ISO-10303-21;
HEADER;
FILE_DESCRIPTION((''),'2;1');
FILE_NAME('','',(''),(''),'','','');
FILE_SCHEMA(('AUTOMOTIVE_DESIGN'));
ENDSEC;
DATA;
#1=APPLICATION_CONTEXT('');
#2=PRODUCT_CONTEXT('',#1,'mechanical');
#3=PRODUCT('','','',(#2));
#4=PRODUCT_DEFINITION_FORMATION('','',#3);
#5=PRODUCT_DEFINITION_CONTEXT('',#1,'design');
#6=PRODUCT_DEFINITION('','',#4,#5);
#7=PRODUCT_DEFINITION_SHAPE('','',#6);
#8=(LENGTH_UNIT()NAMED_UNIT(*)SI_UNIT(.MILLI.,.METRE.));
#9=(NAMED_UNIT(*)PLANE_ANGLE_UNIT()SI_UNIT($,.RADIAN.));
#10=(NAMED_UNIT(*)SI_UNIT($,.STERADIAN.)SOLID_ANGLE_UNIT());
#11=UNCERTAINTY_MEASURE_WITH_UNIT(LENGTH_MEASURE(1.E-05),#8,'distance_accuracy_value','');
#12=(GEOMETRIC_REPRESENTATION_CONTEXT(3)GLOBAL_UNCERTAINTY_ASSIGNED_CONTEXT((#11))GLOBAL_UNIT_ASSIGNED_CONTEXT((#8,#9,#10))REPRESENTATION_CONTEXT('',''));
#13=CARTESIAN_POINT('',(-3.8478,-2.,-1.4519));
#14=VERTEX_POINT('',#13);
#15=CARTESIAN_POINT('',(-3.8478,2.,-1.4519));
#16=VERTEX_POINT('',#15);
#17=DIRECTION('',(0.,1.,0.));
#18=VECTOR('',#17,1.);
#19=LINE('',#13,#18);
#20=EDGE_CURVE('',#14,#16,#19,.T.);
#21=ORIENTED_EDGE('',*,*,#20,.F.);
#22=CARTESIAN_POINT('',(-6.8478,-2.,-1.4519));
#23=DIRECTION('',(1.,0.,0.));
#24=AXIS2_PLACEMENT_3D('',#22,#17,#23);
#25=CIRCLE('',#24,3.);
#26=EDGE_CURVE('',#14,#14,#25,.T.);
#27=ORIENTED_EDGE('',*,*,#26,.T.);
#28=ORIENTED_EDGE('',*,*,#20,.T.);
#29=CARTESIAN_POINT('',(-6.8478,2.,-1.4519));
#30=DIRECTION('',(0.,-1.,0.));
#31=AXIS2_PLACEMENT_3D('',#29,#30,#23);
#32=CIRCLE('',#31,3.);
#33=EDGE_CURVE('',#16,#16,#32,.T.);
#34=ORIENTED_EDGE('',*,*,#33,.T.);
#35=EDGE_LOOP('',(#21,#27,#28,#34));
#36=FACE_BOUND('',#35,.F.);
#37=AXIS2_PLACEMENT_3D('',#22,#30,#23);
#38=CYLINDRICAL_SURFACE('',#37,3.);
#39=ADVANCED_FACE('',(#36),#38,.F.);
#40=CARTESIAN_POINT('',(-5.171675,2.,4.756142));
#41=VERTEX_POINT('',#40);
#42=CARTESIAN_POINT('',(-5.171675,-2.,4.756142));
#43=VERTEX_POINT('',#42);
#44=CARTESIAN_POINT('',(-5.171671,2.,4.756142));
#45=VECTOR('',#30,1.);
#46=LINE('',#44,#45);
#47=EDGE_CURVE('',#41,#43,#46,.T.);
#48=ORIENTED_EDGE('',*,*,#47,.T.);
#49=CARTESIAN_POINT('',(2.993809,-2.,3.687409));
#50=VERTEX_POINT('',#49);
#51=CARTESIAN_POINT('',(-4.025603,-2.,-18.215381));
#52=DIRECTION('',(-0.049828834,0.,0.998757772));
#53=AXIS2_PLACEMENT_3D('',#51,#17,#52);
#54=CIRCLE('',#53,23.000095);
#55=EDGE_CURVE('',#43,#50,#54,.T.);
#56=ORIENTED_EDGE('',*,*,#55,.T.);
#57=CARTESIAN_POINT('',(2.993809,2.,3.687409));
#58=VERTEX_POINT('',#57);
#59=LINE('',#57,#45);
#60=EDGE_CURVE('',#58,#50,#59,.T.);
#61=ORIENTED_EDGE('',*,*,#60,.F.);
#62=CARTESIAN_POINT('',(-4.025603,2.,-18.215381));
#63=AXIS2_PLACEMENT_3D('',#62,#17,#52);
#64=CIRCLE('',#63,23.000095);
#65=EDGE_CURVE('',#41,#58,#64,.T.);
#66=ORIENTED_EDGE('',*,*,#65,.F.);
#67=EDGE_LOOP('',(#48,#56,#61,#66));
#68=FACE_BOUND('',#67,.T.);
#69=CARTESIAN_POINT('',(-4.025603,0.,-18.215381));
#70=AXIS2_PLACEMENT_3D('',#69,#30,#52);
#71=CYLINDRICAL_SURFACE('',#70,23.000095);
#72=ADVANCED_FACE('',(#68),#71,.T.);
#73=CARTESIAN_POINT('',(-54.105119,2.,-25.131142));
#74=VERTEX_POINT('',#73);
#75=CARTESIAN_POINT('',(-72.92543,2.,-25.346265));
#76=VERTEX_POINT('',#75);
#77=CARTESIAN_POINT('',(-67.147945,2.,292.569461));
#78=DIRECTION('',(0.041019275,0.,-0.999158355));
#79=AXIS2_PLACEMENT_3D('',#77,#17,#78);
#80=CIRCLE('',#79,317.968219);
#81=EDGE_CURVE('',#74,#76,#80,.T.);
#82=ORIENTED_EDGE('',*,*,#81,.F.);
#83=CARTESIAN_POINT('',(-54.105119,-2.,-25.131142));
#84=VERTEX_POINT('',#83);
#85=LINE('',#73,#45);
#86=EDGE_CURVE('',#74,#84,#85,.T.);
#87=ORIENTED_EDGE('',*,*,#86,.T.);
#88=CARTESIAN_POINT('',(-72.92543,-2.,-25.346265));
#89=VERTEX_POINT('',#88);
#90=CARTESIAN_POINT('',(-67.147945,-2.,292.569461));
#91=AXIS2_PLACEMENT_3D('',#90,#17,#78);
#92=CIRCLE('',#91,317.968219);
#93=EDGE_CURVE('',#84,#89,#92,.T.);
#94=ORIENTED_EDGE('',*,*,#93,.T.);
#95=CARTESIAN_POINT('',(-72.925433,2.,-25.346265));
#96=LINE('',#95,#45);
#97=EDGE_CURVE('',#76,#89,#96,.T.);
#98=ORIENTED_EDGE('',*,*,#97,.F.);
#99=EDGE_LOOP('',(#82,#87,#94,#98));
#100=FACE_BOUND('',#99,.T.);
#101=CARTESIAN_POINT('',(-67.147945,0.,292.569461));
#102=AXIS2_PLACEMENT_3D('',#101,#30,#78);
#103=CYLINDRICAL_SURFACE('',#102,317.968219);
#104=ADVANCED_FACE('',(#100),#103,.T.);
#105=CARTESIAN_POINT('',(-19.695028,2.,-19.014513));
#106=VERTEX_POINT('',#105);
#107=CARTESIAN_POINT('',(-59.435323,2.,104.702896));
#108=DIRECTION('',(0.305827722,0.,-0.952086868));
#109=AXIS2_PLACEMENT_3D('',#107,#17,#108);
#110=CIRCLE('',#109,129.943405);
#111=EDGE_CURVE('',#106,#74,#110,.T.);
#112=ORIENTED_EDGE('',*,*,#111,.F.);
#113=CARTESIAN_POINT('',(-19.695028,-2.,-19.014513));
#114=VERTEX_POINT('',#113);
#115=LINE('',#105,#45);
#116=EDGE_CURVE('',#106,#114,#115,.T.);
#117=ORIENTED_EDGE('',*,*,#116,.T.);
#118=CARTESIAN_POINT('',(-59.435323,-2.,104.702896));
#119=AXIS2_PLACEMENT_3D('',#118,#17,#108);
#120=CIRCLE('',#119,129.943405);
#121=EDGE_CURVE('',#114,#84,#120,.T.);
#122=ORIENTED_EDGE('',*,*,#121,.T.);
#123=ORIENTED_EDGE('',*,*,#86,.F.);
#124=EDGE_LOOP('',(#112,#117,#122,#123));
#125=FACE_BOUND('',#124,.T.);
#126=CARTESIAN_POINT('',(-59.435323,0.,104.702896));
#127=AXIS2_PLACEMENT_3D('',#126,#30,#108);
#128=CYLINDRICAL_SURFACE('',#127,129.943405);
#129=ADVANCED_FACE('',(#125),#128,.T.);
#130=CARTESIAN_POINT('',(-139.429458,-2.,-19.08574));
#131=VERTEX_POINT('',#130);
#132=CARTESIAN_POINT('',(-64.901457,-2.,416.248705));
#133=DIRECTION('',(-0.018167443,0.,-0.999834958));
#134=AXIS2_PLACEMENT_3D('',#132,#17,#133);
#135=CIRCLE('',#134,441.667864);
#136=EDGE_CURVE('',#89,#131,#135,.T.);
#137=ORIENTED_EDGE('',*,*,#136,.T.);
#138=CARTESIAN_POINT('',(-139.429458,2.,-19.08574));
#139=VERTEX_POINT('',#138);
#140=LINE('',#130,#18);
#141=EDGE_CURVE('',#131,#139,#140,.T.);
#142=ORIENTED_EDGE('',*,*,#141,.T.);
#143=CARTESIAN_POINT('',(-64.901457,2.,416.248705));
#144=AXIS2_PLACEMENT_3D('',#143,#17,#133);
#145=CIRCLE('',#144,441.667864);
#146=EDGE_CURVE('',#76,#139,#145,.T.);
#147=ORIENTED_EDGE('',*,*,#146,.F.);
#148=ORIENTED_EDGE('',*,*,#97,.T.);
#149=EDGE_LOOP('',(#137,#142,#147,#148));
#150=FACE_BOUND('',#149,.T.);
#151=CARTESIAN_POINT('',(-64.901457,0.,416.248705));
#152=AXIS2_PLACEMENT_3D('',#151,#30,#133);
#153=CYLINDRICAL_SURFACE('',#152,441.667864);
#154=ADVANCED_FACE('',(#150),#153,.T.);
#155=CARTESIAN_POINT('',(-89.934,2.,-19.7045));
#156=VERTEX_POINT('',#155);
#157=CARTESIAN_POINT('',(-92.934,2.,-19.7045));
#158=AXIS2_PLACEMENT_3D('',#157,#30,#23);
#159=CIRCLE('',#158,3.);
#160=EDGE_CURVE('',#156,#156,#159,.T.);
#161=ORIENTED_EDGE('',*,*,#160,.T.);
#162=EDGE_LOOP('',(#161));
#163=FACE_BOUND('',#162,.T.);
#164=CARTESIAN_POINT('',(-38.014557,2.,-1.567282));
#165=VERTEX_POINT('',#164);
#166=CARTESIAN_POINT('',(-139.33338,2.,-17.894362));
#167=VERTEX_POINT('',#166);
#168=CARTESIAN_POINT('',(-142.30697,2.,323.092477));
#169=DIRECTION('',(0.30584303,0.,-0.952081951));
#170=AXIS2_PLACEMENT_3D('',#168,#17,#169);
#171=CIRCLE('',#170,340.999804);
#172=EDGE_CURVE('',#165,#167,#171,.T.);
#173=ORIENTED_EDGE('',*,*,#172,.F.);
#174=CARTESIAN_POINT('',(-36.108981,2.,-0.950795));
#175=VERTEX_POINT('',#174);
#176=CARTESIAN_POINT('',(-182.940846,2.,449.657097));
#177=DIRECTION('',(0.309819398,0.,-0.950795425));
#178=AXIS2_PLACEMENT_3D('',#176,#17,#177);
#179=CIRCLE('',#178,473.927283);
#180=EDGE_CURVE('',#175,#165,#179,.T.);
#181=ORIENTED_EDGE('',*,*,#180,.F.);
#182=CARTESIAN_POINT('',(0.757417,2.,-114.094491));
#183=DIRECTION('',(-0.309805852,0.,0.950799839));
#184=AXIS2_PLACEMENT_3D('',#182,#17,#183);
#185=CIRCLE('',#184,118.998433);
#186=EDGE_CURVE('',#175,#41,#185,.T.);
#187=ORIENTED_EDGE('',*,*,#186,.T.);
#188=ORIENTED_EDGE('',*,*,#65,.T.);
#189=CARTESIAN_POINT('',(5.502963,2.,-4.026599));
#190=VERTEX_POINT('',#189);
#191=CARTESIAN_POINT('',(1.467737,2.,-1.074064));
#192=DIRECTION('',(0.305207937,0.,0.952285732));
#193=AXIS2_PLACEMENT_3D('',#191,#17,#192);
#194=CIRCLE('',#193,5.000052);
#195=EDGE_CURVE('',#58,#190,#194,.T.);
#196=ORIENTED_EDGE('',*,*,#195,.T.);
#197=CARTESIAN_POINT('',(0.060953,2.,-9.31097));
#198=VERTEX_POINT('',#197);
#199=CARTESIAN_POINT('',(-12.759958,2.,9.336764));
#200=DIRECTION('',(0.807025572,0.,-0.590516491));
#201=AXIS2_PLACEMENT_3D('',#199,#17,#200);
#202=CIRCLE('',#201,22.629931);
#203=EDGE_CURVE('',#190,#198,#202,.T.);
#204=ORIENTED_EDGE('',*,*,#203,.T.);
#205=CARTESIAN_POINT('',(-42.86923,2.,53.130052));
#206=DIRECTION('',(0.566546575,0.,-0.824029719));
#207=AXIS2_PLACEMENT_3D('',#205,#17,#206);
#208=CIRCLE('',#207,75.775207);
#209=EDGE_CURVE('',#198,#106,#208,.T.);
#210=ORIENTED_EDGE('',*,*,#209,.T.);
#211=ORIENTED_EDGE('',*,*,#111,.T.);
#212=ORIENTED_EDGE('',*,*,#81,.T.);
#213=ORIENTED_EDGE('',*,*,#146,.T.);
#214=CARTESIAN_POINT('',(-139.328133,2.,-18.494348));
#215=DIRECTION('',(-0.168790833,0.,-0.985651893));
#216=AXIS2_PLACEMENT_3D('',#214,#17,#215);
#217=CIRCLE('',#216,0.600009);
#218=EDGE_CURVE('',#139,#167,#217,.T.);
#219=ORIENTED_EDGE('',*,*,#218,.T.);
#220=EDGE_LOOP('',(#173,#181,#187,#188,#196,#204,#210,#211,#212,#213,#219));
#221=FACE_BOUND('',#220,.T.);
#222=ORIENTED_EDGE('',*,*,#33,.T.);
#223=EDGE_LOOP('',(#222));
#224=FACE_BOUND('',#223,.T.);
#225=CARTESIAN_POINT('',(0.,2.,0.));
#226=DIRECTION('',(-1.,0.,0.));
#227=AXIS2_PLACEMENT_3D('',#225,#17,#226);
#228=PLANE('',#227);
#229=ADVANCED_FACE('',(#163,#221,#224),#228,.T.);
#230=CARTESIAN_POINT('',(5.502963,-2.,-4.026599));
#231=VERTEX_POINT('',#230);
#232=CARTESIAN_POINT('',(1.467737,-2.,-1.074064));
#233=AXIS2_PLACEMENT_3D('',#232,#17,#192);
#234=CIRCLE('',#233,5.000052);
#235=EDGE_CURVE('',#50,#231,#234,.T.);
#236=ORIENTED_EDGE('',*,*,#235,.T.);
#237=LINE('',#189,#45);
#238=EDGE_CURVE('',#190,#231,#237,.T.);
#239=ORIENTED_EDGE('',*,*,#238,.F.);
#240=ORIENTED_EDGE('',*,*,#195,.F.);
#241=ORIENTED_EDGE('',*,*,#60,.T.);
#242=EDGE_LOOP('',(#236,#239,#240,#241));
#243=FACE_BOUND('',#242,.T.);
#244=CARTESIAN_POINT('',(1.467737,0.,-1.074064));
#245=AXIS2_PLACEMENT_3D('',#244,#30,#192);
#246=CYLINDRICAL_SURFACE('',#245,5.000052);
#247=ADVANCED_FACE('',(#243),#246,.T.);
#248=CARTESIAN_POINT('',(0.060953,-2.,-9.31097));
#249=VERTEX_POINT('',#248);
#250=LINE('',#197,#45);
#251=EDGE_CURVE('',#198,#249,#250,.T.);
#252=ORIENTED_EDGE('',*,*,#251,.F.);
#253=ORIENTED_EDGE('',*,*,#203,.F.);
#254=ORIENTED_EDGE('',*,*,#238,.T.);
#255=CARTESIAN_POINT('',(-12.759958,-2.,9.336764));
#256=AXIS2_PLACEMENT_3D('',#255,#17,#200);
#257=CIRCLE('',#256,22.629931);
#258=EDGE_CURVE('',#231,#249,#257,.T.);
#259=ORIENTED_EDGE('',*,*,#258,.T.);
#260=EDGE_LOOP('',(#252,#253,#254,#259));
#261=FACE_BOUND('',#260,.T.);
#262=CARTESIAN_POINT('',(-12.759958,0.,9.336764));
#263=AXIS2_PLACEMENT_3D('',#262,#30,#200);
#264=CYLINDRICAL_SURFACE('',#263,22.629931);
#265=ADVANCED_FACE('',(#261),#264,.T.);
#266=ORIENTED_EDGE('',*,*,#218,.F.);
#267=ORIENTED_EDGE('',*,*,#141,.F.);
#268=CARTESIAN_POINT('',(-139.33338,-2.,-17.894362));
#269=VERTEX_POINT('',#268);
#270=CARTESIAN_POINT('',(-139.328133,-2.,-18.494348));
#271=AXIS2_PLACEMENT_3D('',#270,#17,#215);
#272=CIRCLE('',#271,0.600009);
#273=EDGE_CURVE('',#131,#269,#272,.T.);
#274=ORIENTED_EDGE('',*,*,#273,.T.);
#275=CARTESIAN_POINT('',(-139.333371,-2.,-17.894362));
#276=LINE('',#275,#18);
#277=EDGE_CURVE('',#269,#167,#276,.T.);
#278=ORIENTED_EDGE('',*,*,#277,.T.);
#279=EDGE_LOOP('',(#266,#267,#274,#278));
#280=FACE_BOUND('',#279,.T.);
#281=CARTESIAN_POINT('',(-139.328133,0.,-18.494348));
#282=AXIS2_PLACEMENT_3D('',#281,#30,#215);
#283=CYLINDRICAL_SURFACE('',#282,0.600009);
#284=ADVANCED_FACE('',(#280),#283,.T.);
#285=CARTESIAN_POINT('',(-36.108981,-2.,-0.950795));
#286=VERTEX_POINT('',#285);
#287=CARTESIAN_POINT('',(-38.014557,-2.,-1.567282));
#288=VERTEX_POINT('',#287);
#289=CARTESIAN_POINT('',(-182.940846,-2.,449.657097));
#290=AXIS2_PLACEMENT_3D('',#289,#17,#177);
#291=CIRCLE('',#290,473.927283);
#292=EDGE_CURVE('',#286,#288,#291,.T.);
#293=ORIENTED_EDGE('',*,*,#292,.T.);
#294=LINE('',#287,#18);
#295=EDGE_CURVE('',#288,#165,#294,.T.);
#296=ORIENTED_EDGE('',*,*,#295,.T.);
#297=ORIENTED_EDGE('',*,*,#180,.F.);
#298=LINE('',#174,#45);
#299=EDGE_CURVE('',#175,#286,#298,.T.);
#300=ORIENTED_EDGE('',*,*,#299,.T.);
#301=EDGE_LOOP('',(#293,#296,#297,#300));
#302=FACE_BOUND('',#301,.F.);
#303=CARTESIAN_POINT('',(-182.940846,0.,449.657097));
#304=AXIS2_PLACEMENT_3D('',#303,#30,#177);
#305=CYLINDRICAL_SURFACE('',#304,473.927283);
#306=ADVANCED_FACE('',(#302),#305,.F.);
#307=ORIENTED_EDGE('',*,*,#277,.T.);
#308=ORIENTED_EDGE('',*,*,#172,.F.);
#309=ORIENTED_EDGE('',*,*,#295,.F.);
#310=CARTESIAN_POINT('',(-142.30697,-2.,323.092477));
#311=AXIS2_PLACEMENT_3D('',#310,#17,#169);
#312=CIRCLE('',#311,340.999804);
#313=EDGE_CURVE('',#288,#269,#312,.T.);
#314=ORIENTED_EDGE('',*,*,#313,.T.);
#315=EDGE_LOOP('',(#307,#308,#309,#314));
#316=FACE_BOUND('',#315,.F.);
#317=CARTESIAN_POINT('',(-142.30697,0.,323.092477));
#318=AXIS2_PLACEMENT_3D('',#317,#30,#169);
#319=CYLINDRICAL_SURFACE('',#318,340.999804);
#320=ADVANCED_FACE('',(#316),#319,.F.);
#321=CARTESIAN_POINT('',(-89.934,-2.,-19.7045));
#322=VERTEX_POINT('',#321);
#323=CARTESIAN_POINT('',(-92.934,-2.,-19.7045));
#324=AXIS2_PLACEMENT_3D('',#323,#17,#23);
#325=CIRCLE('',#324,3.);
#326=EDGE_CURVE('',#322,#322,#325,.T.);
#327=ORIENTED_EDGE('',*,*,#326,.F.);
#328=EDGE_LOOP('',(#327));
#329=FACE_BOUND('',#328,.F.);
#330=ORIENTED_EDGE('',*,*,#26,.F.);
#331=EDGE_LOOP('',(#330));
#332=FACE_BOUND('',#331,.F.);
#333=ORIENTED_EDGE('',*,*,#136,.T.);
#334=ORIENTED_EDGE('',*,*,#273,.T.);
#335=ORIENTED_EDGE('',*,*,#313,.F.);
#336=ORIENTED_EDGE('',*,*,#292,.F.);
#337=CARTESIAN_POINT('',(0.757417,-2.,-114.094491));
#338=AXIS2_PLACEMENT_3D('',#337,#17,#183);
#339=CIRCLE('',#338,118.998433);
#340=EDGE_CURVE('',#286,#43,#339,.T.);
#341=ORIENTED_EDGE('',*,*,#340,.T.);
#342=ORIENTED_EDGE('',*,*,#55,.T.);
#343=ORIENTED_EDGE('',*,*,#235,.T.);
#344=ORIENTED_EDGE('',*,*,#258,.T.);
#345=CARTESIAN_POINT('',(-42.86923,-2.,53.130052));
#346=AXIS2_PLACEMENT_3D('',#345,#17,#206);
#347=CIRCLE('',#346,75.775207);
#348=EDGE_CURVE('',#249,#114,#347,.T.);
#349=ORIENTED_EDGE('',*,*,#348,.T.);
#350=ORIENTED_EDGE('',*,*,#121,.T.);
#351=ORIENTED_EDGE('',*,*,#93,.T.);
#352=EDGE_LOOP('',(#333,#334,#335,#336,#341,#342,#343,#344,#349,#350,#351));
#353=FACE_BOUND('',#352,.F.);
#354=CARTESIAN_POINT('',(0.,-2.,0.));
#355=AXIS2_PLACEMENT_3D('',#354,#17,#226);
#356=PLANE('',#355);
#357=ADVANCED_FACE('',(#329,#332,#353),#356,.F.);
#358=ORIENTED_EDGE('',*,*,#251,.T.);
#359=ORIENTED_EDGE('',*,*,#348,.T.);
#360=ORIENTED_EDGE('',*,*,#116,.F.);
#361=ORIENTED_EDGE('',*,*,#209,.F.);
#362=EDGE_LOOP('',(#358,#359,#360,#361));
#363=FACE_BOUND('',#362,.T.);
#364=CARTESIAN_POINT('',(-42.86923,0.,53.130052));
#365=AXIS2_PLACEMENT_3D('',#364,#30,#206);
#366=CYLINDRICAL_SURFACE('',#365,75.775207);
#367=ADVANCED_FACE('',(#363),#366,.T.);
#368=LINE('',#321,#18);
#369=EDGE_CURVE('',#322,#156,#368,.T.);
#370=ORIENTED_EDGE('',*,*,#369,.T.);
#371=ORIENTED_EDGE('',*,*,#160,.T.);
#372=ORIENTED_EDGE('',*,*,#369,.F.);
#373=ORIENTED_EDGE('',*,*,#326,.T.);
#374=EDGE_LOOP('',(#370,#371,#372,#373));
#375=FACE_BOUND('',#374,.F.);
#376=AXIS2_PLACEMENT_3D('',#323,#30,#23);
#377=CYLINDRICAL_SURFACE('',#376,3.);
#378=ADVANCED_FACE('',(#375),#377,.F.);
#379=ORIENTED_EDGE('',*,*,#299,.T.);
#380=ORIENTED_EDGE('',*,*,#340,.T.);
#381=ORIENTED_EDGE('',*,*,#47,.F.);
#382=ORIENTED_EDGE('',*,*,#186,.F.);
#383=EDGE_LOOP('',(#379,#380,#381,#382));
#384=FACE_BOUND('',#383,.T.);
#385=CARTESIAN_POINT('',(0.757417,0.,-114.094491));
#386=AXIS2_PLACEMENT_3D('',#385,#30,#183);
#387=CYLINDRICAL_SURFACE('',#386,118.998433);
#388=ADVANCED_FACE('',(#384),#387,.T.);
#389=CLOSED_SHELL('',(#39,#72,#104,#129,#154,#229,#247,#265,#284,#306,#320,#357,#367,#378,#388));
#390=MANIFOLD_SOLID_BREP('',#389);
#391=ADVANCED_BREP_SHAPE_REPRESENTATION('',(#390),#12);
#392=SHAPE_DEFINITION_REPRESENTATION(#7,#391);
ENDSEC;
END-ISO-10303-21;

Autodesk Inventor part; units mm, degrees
ref_plane "YZ Plane" through (0, 0, 0) normal (1, 0, 0) x (0, 1, 0)
ref_plane "XZ Plane" through (0, 0, 0) normal (0, 1, 0) x (-1, 0, 0)
ref_plane "XY Plane" through (0, 0, 0) normal (0, 0, 1) x (1, 0, 0)
sketch "スケッチ1" plane through (0, 0, 0) normal (0, 1, 0) x (-1, 0, 0)
  arc A0 (139.5982, -20.0714) -> (139.3421, -16.8944) centre (139.3282, -18.4944) ccw projected
  arc A1 (72.9436, -26.3461) -> (139.5982, -20.0714) centre (64.9013, 416.2515) ccw projected
  arc A2 (54.0641, -26.1303) -> (72.9436, -26.3461) centre (67.1484, 292.5868) ccw projected
  arc A3 (19.3892, -19.9666) -> (54.0641, -26.1303) centre (59.4352, 104.7024) ccw projected
  arc A4 (-0.6275, -10.135) -> (19.3892, -19.9666) centre (42.8692, 53.13) ccw projected
  arc A5 (-6.31, -4.6171) -> (-0.6275, -10.135) centre (12.76, 9.3368) ccw projected
  arc A6 (-3.299, 4.6397) -> (-6.31, -4.6171) centre (-1.4678, -1.074) ccw projected
  arc A7 (5.2215, 5.7549) -> (-3.299, 4.6397) centre (4.0256, -18.2153) ccw projected
  arc A8 (36.4188, 0) -> (5.2215, 5.7549) centre (-0.7578, -114.096) ccw projected
  arc A9 (36.4188, 0) -> (38.3204, -0.6152) centre (185.125, 456.3841) ccw projected
  arc A10 (38.3204, -0.6152) -> (139.3421, -16.8944) centre (142.307, 323.0926) ccw projected
  point P0 (0, 0)
extrude "押し出し1" add sketch "スケッチ1" along normal mid plane 4
sketch "スケッチ2" plane through (0, -2, 0) normal (0, -1, 0) x (1, 0, 0)
  circle A0 centre (-6.8478, -1.4519) radius 3
  circle A1 centre (-92.934, -19.7045) radius 3
  line L0 (0, 0) -> (-112.4991, -23.8528)
  arc A2 (-139.5982, -20.0714) -> (-72.9436, -26.3461) centre (-64.9013, 416.2515) ccw projected
  dimension "d3" = 6
  dimension "d4" = 6
  dimension "d5" = 115
  dimension "d6" = 7
  dimension "d7" = 95
extrude "押し出し2" cut sketch "スケッチ2" against normal through all
thicken "厚み1" operation cut thickness 1 both sides no extend neighbours no toward (0.0338891, 0, -0.9994256) faces at (-130.7847, 0.6667, -16.7121) (-37.4749, 0.6667, -0.3428) (-8.7492, -0.6667, 5.5268) (2.3792, -0.6667, 4.9143) (6.574, -0.6667, -4.2247) (1.3466, -0.6667, -9.6205) (-17.0344, -0.6667, -19.1679) (-50.1454, -0.6667, -25.9105) (-56.1608, 0.6667, -26.2095) (-102.6817, 0.6667, -24.804) (-139.7269, 0.6667, -20.0439)
properties part number "flap_s" material "木材 (オーク)"
